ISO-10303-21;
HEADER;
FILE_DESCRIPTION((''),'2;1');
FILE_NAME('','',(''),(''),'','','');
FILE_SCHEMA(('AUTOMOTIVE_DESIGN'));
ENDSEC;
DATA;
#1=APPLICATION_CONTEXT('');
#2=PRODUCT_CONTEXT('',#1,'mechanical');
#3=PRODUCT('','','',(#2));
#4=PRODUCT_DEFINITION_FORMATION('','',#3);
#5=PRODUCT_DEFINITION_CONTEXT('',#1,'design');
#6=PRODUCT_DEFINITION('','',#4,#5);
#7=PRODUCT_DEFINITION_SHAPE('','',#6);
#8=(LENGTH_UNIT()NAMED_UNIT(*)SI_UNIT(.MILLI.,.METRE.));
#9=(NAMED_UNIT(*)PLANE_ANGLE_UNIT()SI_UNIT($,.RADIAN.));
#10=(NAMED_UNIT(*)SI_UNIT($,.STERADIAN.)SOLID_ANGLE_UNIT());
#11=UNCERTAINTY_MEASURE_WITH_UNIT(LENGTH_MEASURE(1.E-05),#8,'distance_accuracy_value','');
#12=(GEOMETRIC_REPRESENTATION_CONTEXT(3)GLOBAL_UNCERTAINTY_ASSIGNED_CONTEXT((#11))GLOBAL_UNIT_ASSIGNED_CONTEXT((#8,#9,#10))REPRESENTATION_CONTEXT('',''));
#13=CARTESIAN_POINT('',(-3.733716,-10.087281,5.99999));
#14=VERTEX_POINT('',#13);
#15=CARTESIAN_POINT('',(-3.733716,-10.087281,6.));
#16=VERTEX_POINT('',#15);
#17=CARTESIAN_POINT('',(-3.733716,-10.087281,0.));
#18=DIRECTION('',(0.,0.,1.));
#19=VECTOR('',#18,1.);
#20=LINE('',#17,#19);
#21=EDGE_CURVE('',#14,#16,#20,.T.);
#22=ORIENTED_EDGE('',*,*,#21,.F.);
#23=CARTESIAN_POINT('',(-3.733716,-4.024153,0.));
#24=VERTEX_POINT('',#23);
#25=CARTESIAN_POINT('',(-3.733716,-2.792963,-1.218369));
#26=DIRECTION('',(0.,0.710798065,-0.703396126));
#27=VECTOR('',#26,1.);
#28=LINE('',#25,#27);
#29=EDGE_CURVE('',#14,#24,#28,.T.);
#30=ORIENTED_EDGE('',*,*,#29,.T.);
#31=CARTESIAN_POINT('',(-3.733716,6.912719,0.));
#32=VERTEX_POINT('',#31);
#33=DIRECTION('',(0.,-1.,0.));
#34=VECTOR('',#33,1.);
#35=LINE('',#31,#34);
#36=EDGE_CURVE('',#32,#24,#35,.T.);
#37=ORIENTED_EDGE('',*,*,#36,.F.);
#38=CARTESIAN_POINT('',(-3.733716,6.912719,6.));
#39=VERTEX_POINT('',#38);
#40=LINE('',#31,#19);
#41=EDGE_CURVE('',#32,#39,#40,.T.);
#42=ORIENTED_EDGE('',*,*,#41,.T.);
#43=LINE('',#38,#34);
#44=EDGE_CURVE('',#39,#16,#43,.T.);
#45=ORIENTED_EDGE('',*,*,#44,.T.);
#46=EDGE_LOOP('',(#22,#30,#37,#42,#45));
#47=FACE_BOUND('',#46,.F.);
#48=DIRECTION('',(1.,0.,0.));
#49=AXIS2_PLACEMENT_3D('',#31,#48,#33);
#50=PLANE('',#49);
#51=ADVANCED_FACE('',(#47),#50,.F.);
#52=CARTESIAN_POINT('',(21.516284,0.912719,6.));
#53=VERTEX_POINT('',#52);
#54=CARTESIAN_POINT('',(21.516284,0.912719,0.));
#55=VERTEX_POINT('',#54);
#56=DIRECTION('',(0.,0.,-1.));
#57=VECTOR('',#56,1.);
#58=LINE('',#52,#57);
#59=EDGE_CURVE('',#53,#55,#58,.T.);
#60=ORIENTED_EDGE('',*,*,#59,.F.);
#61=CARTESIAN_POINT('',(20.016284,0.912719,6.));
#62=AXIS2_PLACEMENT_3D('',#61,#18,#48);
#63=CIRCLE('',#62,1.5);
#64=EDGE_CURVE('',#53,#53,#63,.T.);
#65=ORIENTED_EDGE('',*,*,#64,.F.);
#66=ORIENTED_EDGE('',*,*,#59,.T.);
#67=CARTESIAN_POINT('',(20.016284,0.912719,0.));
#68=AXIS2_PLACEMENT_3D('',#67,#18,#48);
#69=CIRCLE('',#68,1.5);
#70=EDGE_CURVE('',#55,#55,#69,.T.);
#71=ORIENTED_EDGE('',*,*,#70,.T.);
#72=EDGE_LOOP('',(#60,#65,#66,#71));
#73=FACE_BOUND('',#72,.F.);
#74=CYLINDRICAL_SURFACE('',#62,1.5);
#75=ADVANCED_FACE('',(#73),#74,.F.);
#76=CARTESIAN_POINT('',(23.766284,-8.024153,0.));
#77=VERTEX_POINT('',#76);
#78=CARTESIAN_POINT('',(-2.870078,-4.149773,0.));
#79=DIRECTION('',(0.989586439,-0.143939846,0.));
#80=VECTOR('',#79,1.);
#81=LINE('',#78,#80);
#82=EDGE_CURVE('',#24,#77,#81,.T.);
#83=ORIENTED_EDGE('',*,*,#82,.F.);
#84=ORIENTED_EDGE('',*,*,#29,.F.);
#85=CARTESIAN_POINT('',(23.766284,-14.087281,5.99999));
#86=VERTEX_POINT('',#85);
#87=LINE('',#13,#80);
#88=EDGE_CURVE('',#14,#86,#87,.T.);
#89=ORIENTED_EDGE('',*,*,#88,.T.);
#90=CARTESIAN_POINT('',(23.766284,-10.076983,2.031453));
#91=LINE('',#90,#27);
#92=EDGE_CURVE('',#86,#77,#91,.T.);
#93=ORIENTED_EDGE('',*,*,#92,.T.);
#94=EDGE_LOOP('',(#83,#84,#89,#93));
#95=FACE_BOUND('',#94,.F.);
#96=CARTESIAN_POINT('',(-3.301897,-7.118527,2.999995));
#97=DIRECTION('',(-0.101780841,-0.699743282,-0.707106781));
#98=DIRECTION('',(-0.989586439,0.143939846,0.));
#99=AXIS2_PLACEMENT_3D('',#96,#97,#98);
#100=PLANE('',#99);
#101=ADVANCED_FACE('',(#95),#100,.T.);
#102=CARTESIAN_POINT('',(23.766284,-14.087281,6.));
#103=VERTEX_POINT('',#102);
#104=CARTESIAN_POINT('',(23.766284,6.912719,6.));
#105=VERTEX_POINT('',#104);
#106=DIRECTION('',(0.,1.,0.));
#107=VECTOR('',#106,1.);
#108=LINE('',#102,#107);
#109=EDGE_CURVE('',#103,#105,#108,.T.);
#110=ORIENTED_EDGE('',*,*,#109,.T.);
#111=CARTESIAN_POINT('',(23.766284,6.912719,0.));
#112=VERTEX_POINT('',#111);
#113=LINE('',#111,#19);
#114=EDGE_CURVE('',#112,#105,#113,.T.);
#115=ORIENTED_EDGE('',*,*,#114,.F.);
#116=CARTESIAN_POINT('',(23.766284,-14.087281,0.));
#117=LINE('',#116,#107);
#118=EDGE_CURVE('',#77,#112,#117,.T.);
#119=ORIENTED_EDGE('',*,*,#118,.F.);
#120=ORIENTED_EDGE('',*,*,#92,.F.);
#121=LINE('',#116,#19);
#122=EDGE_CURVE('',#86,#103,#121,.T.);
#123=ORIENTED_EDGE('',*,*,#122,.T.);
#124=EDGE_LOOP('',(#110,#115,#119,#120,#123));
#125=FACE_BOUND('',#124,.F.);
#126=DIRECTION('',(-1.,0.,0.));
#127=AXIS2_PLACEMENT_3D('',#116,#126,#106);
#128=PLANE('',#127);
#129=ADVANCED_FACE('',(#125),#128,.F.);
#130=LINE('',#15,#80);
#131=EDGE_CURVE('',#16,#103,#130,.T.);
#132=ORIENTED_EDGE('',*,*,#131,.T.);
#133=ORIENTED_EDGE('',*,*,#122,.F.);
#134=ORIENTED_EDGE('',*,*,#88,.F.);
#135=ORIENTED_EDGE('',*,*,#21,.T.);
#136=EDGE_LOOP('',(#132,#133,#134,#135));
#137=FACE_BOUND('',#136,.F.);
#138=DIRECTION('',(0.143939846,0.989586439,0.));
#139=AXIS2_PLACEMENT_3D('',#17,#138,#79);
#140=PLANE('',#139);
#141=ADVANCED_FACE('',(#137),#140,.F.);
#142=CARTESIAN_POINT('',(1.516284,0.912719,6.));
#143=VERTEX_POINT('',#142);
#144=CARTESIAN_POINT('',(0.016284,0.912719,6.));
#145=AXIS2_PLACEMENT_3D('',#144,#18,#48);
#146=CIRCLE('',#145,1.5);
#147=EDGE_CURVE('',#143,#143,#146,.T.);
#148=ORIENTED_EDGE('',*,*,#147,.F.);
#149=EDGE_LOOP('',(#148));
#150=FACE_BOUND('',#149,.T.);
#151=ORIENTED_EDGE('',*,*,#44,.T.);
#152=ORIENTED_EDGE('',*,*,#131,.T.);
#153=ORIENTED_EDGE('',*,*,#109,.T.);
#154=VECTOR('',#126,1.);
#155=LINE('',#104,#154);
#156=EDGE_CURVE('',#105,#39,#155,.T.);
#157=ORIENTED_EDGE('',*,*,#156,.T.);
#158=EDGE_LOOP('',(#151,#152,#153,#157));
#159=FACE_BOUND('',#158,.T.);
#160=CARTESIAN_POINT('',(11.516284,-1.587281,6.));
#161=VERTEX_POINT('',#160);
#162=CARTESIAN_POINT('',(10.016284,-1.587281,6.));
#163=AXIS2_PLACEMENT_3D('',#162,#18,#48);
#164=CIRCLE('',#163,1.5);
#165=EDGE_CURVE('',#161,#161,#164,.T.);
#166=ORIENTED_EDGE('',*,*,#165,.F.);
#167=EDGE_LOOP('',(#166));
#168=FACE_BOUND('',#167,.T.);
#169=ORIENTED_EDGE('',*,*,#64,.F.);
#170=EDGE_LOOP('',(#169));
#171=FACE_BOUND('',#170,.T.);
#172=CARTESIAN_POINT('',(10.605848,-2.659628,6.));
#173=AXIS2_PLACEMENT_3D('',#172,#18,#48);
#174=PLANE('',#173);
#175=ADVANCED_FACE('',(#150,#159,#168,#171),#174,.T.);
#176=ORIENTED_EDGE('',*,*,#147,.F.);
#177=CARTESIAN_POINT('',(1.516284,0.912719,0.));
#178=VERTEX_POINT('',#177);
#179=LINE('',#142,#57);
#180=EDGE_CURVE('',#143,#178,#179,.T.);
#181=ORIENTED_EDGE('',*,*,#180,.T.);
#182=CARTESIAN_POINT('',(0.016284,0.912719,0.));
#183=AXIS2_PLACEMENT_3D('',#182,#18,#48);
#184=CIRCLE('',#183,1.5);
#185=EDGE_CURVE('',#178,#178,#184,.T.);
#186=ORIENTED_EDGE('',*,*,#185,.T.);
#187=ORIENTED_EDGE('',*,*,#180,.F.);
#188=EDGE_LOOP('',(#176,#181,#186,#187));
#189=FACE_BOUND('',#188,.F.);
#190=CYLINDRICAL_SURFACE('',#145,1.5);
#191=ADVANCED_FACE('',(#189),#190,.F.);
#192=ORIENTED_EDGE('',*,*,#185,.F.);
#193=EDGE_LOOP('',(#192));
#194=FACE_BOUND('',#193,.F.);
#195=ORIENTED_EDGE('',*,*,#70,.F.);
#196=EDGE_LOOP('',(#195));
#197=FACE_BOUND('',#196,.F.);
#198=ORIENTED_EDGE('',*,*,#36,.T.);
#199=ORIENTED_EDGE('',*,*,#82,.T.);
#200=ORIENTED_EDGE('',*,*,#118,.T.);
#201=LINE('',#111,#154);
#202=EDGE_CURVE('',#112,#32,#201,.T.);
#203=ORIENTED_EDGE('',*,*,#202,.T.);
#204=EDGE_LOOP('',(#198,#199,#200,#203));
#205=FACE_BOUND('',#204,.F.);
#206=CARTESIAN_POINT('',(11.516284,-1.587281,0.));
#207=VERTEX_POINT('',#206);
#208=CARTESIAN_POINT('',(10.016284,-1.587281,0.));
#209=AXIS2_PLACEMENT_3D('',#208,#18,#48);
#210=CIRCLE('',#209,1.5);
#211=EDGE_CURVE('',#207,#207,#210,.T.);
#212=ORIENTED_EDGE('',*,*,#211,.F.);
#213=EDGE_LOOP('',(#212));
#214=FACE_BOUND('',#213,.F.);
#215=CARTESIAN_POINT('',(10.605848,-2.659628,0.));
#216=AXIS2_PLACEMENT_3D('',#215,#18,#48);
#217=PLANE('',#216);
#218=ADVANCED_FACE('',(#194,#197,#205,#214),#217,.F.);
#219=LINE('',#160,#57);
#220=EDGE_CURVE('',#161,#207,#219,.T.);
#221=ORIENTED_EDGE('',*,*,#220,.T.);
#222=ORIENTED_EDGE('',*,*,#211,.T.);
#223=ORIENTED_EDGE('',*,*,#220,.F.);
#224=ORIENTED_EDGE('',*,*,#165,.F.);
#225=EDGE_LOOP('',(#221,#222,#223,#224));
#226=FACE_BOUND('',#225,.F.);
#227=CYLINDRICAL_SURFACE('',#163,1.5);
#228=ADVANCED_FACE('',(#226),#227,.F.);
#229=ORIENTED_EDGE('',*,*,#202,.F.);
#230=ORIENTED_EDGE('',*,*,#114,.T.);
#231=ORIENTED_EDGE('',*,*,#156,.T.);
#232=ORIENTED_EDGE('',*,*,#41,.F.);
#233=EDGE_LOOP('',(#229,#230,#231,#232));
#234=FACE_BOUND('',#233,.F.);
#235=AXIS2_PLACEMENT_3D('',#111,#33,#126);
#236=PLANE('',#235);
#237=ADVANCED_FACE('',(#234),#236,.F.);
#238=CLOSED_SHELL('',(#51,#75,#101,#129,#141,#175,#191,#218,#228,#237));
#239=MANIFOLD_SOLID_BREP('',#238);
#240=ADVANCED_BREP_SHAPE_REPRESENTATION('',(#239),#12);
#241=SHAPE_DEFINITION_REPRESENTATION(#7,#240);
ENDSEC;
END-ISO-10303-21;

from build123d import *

# Parameters (mm, degrees)
F1_DEPTH = 6
F2_SIZE  = 5.99999
F3_R     = 1.5
F4_DEPTH = 6


# Not quite as in the source:
# - a fillet or chamfer is up to 0.001 mm smaller than in the source, because OpenCascade refuses the exact size


with BuildPart() as f1:
    # F0 (on Top) → F1 (new body)
    with BuildSketch(Plane.XY):
        Polygon((23.7662842423, 6.9127185345), (-3.7337157577, 6.9127185345), (-3.7337157577, -10.0872814655), (23.7662842423, -14.0872814655), align=None)
    extrude(amount=F1_DEPTH)

    # F2 (size 6 in the source; OpenCascade refuses exactly that, so slightly less here)
    f2_edges = [f1.edges().sort_by_distance(p)[0] for p in [
        (10.016284, -12.087281, 0),
    ]]
    chamfer(f2_edges, length=F2_SIZE)

    # F3 (on face) → F4 (cut, through all)
    with BuildSketch(Plane.XY.offset(6)):
        with Locations((0.0162842423, 0.9127185345)):
            Circle(F3_R)
        with Locations((10.0162842423, -1.5872814655)):
            Circle(F3_R)
        with Locations((20.0162842423, 0.9127185345)):
            Circle(F3_R)
    extrude(amount=-F4_DEPTH, mode=Mode.SUBTRACT)


solid = f1.part
